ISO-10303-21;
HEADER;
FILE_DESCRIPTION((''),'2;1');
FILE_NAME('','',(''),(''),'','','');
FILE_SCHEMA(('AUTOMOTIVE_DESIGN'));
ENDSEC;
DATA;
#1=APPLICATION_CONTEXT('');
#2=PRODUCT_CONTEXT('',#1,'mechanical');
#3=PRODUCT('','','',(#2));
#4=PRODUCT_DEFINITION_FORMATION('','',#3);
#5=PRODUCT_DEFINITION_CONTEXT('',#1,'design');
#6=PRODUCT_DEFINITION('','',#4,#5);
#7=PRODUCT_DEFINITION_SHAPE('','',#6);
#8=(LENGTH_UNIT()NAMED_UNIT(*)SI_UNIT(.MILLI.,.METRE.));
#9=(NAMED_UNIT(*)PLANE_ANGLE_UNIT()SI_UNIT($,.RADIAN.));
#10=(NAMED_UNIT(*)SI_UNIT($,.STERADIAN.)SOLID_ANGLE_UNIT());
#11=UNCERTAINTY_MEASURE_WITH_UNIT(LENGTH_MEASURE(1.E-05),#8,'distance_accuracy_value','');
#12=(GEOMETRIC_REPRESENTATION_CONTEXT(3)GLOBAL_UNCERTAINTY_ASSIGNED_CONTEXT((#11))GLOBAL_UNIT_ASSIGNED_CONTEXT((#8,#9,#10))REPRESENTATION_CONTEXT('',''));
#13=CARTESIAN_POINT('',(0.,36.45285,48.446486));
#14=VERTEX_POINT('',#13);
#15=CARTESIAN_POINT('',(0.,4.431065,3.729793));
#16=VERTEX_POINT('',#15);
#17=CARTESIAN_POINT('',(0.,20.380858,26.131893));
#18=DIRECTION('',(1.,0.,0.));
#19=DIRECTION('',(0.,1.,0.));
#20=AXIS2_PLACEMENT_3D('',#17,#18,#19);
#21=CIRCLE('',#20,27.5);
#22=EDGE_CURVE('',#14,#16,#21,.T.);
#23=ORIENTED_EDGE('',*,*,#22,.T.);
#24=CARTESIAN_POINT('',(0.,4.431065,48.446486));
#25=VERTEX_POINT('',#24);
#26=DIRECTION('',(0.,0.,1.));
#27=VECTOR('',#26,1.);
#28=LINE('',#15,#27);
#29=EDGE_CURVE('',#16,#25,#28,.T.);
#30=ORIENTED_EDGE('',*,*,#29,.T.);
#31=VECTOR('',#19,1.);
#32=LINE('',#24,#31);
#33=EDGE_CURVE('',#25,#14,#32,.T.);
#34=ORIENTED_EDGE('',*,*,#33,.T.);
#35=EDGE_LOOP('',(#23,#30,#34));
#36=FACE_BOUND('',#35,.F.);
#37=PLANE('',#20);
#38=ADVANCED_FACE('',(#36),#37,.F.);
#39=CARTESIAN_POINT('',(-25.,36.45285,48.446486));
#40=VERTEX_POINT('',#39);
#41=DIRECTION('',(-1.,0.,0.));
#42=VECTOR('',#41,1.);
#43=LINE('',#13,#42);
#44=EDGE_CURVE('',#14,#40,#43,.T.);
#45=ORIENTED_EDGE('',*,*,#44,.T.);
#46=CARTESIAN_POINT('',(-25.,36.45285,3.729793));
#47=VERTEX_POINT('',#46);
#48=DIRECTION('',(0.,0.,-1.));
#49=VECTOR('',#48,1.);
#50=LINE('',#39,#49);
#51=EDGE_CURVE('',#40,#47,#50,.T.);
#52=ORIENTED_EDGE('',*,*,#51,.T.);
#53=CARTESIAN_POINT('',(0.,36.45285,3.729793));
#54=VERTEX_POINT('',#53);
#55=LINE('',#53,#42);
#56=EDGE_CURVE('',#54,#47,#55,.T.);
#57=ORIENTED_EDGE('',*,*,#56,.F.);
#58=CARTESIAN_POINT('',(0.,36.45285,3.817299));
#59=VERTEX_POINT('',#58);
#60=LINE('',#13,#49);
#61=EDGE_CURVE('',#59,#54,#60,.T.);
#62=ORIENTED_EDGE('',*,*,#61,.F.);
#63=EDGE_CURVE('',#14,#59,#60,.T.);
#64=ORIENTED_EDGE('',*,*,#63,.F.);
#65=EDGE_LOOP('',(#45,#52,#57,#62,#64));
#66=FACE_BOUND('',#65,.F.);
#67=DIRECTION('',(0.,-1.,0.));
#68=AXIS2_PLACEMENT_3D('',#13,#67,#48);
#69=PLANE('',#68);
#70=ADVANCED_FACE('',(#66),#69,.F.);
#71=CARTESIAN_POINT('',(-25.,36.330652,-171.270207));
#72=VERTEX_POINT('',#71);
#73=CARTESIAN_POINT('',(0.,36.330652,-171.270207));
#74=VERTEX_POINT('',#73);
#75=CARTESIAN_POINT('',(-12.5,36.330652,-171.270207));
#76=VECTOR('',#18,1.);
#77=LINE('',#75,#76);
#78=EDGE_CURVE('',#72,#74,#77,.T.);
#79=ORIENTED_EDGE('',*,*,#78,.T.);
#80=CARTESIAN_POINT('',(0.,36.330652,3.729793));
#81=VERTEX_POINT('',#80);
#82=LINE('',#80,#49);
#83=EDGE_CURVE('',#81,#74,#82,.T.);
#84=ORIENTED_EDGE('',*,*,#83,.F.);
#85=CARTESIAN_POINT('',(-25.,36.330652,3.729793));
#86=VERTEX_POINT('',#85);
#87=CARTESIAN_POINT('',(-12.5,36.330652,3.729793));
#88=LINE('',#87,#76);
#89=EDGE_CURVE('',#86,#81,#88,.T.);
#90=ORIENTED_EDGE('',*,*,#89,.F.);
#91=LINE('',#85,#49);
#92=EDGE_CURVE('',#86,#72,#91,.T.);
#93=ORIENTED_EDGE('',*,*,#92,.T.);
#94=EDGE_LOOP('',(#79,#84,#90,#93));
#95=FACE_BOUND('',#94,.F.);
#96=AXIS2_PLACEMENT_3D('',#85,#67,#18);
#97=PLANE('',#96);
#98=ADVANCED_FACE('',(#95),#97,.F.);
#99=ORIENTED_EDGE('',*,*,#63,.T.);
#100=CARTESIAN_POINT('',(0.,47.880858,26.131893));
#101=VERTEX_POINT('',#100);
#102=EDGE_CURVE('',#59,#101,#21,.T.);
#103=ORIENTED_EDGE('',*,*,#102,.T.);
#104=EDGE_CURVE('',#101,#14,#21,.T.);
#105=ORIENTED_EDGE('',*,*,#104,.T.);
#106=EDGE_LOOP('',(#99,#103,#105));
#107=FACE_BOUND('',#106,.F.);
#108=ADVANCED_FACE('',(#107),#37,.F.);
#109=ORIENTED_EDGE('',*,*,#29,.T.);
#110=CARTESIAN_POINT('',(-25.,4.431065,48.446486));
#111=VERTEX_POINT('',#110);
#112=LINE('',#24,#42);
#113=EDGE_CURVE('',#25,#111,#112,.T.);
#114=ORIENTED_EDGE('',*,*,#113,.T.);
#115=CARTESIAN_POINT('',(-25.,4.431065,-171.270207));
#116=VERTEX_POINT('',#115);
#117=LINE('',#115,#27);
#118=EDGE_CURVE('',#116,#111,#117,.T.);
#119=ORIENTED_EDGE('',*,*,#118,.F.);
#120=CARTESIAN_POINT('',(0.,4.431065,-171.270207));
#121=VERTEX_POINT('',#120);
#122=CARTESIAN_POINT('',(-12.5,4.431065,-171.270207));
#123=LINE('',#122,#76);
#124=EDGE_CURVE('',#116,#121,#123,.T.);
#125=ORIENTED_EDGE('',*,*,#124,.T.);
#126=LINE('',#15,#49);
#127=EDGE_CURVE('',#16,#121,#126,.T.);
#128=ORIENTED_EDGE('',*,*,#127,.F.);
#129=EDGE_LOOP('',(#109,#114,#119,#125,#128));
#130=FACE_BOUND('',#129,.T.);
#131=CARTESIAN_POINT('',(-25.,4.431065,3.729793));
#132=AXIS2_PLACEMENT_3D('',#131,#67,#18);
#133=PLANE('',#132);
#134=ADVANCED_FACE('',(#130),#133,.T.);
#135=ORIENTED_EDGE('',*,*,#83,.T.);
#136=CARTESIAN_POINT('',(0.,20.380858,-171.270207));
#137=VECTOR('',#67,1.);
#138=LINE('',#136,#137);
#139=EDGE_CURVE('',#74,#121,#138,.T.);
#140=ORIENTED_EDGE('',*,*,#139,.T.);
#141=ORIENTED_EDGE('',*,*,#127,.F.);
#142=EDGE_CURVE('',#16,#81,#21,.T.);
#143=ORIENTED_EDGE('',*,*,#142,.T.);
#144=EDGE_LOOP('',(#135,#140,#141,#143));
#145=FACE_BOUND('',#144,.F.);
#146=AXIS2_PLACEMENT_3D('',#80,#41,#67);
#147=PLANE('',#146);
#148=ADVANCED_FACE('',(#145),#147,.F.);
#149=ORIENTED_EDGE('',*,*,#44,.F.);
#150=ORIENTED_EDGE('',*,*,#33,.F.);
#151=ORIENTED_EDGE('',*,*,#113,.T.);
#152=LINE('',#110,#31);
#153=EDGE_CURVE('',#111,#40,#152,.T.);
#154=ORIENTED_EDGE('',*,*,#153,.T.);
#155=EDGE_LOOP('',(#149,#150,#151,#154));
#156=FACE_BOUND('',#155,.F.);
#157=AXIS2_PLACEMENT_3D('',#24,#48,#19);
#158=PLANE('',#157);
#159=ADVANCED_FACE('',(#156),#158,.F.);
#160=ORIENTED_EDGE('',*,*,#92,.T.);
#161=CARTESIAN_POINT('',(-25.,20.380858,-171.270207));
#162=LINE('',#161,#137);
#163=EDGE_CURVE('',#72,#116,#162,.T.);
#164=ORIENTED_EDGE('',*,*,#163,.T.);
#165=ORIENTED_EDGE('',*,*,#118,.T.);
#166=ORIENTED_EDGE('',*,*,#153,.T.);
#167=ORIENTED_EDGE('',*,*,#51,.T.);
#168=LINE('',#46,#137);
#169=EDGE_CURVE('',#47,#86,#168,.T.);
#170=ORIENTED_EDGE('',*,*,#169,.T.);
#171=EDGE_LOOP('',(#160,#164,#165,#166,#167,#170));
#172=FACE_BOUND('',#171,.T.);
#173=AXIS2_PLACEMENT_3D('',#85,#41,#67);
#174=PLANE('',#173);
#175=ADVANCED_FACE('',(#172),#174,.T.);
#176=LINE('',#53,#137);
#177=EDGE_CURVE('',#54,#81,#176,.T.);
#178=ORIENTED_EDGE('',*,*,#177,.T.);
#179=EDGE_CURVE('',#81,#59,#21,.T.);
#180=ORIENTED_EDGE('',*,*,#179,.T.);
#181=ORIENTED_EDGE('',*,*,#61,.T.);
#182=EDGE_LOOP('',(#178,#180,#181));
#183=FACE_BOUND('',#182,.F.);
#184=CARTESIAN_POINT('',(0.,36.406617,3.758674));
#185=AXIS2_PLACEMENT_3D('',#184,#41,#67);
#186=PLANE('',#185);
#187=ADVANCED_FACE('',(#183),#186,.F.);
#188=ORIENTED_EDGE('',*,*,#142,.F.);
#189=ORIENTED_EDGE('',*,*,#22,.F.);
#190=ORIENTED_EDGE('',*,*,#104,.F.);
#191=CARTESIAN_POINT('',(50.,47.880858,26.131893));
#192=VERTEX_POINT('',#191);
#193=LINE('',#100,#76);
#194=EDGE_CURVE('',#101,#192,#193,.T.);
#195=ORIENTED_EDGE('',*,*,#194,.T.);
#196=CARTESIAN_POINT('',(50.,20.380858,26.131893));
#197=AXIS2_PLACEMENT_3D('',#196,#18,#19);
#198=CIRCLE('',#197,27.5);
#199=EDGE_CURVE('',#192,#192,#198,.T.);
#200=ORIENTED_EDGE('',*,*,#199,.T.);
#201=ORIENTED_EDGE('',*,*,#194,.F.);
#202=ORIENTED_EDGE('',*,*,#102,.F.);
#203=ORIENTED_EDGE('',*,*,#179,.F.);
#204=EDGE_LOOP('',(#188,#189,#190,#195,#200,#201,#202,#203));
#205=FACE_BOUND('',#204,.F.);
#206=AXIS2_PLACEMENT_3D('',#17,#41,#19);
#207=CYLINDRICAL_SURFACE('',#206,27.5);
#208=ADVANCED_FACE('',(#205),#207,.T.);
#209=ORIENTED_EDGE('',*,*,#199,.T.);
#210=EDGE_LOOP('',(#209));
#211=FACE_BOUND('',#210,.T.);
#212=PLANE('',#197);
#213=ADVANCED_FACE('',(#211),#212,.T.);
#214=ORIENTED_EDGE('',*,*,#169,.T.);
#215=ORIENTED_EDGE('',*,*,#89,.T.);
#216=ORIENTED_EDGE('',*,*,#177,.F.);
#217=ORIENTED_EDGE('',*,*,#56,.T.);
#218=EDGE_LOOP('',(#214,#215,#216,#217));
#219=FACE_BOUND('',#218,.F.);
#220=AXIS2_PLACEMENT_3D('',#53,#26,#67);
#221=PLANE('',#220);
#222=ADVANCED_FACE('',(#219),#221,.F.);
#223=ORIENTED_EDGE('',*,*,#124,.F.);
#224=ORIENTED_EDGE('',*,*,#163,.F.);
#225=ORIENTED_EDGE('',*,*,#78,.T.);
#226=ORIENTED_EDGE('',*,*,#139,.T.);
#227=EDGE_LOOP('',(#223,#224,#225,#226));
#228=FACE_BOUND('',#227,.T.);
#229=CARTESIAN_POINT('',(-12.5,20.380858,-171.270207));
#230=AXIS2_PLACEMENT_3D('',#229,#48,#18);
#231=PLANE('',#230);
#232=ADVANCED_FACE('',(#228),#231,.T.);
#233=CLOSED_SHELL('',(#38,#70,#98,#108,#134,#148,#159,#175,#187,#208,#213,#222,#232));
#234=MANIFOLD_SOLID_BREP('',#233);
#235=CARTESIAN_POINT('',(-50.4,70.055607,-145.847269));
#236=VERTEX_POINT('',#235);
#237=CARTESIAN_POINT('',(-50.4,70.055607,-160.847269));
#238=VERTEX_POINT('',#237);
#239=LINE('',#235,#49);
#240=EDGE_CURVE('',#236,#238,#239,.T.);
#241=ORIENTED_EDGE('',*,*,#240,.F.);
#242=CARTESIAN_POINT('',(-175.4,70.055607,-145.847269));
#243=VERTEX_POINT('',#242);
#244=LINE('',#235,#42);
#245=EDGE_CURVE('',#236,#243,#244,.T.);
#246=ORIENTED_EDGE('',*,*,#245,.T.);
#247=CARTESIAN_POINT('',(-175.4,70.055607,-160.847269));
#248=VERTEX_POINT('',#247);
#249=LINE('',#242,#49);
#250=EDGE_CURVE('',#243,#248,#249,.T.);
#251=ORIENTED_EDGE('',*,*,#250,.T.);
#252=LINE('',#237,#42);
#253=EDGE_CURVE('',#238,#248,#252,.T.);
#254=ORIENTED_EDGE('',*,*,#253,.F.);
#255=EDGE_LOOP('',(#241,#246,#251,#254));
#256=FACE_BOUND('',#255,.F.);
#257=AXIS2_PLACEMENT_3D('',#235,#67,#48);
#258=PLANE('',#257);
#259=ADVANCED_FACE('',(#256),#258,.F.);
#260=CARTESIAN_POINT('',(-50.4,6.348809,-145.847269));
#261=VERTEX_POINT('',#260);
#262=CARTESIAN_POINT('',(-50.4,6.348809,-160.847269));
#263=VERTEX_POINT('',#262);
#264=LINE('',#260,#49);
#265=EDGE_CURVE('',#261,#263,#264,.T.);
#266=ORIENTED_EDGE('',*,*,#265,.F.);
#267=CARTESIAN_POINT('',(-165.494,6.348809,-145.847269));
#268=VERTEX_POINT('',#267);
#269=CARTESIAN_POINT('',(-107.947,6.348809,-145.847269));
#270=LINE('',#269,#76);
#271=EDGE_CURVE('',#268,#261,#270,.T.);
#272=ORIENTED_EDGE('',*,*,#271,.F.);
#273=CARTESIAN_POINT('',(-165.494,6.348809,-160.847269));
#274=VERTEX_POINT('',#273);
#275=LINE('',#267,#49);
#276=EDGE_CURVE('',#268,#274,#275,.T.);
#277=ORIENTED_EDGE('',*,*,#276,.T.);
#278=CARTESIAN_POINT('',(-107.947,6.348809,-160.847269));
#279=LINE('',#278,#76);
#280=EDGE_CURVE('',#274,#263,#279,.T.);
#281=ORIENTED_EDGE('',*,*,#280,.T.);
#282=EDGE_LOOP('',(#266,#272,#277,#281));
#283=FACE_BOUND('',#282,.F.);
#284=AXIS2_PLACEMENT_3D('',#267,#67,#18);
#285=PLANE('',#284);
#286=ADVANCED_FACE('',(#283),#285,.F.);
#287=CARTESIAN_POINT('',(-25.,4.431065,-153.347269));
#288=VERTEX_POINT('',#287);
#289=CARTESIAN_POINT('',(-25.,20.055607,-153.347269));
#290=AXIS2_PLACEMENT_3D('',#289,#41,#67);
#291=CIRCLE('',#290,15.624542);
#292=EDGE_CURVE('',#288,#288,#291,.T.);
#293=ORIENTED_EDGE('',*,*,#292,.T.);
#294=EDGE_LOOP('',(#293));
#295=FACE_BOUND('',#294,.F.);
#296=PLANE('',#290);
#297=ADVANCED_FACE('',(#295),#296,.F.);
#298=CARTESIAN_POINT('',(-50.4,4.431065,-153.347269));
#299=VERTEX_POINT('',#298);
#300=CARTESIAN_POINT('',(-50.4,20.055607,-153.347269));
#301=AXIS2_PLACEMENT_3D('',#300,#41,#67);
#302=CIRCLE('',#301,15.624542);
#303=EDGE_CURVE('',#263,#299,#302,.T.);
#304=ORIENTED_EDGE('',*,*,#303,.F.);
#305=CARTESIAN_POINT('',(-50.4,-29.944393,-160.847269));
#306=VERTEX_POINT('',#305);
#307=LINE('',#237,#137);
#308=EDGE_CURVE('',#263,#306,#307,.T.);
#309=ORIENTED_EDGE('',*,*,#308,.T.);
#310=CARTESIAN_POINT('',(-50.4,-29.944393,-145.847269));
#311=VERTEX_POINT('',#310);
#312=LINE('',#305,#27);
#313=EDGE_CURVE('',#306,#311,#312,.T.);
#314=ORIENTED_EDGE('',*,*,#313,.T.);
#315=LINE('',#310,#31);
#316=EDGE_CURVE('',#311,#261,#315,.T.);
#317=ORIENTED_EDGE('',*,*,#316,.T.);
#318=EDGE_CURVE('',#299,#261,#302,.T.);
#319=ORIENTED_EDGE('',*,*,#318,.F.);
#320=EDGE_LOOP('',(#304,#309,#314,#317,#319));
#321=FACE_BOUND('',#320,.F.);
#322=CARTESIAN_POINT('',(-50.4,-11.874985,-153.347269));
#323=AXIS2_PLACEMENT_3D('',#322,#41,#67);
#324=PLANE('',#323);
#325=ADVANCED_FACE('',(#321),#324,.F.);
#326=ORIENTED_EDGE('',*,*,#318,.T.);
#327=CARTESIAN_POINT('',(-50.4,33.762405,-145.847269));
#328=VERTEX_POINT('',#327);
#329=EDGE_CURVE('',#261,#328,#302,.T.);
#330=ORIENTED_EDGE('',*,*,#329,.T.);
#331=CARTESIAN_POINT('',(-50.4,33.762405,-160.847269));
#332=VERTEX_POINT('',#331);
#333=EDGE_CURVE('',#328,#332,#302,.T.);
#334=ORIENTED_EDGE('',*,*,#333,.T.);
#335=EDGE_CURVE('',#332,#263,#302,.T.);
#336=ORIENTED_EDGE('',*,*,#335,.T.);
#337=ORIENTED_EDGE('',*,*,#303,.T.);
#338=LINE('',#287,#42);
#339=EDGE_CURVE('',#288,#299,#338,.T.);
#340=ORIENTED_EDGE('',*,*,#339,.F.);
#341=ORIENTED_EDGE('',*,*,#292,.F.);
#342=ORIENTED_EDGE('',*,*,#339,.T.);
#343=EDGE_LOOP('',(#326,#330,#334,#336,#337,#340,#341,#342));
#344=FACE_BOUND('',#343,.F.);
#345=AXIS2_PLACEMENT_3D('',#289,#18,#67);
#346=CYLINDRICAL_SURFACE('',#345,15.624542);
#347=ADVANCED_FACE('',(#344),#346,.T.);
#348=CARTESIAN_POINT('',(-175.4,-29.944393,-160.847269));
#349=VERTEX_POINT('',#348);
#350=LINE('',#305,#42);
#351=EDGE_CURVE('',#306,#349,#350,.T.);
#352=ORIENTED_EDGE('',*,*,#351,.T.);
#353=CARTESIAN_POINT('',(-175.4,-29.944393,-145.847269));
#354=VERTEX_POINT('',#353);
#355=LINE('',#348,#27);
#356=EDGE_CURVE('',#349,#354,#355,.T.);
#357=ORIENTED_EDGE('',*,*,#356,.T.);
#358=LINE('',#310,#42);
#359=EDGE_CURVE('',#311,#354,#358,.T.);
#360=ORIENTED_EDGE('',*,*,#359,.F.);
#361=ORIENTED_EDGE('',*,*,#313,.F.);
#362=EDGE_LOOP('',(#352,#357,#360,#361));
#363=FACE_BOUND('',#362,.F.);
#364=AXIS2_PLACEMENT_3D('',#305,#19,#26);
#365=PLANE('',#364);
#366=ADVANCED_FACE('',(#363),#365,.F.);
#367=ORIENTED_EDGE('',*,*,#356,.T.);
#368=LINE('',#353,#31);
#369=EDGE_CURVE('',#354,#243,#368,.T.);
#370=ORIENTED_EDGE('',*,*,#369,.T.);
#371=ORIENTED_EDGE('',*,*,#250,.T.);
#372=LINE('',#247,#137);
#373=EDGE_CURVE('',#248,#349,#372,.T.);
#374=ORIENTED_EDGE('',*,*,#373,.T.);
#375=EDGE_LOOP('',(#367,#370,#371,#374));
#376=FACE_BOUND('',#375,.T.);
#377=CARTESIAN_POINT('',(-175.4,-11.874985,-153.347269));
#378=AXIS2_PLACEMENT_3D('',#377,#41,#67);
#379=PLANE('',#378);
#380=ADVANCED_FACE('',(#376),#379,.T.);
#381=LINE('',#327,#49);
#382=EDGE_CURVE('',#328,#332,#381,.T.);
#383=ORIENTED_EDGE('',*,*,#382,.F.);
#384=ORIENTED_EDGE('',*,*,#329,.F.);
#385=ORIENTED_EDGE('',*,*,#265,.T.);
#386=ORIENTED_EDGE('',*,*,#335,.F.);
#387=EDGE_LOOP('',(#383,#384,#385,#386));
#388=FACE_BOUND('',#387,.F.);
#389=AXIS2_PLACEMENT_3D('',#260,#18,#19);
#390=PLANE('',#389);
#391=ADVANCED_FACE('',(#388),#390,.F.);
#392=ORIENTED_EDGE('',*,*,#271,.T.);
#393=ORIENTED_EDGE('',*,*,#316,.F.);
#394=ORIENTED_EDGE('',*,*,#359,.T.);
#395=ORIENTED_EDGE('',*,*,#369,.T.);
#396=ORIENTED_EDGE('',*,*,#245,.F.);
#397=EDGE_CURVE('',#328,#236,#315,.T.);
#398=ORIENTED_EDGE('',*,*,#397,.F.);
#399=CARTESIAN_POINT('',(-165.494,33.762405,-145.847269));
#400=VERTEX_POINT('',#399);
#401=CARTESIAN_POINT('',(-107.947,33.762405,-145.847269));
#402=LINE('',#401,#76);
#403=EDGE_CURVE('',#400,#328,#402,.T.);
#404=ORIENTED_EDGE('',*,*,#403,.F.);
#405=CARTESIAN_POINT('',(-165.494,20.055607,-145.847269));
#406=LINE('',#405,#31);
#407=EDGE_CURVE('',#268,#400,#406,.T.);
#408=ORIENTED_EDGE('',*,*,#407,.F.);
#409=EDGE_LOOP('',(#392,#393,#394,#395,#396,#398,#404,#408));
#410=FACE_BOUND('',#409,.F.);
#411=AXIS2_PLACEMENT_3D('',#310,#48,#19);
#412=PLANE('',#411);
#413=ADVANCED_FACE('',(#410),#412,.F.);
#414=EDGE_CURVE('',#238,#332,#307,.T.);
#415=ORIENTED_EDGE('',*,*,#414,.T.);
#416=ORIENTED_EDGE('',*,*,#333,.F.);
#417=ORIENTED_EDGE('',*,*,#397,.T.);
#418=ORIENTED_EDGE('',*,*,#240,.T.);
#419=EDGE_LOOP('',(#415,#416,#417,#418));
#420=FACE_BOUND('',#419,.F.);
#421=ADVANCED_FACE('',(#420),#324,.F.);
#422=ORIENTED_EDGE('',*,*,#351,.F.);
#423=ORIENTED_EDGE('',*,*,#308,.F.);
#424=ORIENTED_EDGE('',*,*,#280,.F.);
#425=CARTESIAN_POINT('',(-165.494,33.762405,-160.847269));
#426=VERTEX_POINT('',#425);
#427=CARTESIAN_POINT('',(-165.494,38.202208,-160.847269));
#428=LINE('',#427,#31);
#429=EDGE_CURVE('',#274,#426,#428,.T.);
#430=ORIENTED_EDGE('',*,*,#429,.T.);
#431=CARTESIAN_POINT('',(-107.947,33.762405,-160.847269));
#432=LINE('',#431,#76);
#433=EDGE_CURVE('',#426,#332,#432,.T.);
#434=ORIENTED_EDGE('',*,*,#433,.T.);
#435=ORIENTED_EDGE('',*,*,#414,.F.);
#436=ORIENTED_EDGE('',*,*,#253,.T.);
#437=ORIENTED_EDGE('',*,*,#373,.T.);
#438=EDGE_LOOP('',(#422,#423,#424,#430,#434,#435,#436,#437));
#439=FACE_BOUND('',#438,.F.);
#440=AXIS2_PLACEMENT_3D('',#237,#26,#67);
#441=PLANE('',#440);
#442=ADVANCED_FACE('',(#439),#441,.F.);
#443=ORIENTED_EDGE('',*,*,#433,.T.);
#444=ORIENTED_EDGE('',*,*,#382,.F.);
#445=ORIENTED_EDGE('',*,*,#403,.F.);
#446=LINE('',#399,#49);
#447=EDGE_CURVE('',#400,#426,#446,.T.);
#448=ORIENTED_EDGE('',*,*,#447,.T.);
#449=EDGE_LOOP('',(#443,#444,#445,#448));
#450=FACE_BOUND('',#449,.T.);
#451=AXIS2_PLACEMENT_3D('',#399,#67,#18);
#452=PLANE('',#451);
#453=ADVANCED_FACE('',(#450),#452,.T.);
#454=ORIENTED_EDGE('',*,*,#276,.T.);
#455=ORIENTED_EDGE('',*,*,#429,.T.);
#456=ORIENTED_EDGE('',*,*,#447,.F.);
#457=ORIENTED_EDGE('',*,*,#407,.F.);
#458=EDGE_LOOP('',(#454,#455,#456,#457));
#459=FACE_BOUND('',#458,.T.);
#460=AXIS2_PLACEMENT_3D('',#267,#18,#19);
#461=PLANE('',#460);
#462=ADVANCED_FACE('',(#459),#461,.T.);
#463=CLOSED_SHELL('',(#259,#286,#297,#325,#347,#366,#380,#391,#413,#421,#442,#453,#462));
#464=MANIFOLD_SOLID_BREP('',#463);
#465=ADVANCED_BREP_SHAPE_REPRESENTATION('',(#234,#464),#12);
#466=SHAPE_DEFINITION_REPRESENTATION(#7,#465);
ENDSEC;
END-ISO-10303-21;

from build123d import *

# Parameters (mm, degrees)
F0_R      = 27.5
F1_DEPTH  = 50
F3_DEPTH  = 25
F4_W      = 25
F4_H      = 31.8995873117
F5_DEPTH  = 175
F6_R      = 15.6245422852
F7_DEPTH  = 25.4
F9_DEPTH  = 125
F10_W     = 115.094
F10_H     = 27.4135967448
F11_DEPTH = 25.4


with BuildPart() as f1:
    # F0 (on Right) → F1 (new body)
    with BuildSketch(Plane.YZ):
        with Locations((20.3808583319, 26.1318925768)):
            Circle(F0_R)
    extrude(amount=F1_DEPTH)

    # F2 (on face) → F3 (join)
    with BuildSketch(Plane(origin=(0, 0, 0), x_dir=(0, -1, 0), z_dir=(-1, 0, 0))):
        with BuildLine():
            ThreePointArc((-36.3306519878, 3.7297926231), (-36.3918107646, 3.7734623502), (-36.4528499765, 3.8172990431))
            Line((-36.4528499765, 3.8172990431), (-36.4528499765, 3.7297926231))
            Line((-36.4528499765, 3.7297926231), (-36.3306519878, 3.7297926231))
        make_face()
        with BuildLine():
            Line((-4.4310646761, 48.4464861105), (-36.4528499765, 48.4464861105))
            Line((-36.4528499765, 48.4464861105), (-36.4528499765, 3.8172990431))
            ThreePointArc((-36.4528499765, 3.8172990431), (-36.3918107646, 3.7734623502), (-36.3306519878, 3.7297926231))
            Line((-36.3306519878, 3.7297926231), (-4.4310646761, 3.7297926231))
            Line((-4.4310646761, 3.7297926231), (-4.4310646761, 48.4464861105))
        make_face()
    extrude(amount=F3_DEPTH)

    # F4 (on face) → F5 (join)
    with BuildSketch(Plane(origin=(0, 0, 3.7297926231), x_dir=(1, 0, 0), z_dir=(0, 0, -1))):
        with Locations((-12.5, -20.3808583319)):
            Rectangle(F4_W, F4_H)
    extrude(amount=F5_DEPTH)


with BuildPart() as f7:
    # F6 (on face) → F7 (new body)
    with BuildSketch(Plane(origin=(-25, 0, 0), x_dir=(0, -1, 0), z_dir=(-1, 0, 0))):
        with Locations((-20.0556069613, -153.3472687006)):
            Circle(F6_R)
    extrude(amount=F7_DEPTH)

    # F8 (on face) → F9 (join)
    with BuildSketch(Plane(origin=(-50.4, 0, 0), x_dir=(0, -1, 0), z_dir=(-1, 0, 0))):
        with BuildLine():
            Line((29.9443930387, -160.8472687006), (29.9443930387, -145.8472687006))
            Line((29.9443930387, -145.8472687006), (-6.3488085888, -145.8472687006))
            ThreePointArc((-6.3488085888, -145.8472687006), (-4.9180911085, -149.4766181831), (-4.4310646761, -153.3472687006))
            ThreePointArc((-4.4310646761, -153.3472687006), (-4.9180911085, -157.2179192181), (-6.3488085888, -160.8472687006))
            Line((-6.3488085888, -160.8472687006), (29.9443930387, -160.8472687006))
        make_face()
        with BuildLine():
            ThreePointArc((-4.4310646761, -153.3472687006), (-4.9180911085, -149.4766181831), (-6.3488085888, -145.8472687006))
            Line((-6.3488085888, -145.8472687006), (-33.7624053337, -145.8472687006))
            ThreePointArc((-33.7624053337, -145.8472687006), (-35.6801492464, -153.3472687006), (-33.7624053337, -160.8472687006))
            Line((-33.7624053337, -160.8472687006), (-6.3488085888, -160.8472687006))
            ThreePointArc((-6.3488085888, -160.8472687006), (-4.9180911085, -157.2179192181), (-4.4310646761, -153.3472687006))
        make_face()
        with BuildLine():
            ThreePointArc((-33.7624053337, -160.8472687006), (-35.6801492464, -153.3472687006), (-33.7624053337, -145.8472687006))
            Line((-33.7624053337, -145.8472687006), (-70.0556069613, -145.8472687006))
            Line((-70.0556069613, -145.8472687006), (-70.0556069613, -160.8472687006))
            Line((-70.0556069613, -160.8472687006), (-33.7624053337, -160.8472687006))
        make_face()
    extrude(amount=F9_DEPTH)

    # F10 (on face) → F11 (cut)
    with BuildSketch(Plane.XY.offset(-145.8472687006)):
        with Locations((-107.947, 20.0556069613)):
            Rectangle(F10_W, F10_H)
    extrude(amount=-F11_DEPTH, mode=Mode.SUBTRACT)


solid = Compound([f1.part, f7.part])
